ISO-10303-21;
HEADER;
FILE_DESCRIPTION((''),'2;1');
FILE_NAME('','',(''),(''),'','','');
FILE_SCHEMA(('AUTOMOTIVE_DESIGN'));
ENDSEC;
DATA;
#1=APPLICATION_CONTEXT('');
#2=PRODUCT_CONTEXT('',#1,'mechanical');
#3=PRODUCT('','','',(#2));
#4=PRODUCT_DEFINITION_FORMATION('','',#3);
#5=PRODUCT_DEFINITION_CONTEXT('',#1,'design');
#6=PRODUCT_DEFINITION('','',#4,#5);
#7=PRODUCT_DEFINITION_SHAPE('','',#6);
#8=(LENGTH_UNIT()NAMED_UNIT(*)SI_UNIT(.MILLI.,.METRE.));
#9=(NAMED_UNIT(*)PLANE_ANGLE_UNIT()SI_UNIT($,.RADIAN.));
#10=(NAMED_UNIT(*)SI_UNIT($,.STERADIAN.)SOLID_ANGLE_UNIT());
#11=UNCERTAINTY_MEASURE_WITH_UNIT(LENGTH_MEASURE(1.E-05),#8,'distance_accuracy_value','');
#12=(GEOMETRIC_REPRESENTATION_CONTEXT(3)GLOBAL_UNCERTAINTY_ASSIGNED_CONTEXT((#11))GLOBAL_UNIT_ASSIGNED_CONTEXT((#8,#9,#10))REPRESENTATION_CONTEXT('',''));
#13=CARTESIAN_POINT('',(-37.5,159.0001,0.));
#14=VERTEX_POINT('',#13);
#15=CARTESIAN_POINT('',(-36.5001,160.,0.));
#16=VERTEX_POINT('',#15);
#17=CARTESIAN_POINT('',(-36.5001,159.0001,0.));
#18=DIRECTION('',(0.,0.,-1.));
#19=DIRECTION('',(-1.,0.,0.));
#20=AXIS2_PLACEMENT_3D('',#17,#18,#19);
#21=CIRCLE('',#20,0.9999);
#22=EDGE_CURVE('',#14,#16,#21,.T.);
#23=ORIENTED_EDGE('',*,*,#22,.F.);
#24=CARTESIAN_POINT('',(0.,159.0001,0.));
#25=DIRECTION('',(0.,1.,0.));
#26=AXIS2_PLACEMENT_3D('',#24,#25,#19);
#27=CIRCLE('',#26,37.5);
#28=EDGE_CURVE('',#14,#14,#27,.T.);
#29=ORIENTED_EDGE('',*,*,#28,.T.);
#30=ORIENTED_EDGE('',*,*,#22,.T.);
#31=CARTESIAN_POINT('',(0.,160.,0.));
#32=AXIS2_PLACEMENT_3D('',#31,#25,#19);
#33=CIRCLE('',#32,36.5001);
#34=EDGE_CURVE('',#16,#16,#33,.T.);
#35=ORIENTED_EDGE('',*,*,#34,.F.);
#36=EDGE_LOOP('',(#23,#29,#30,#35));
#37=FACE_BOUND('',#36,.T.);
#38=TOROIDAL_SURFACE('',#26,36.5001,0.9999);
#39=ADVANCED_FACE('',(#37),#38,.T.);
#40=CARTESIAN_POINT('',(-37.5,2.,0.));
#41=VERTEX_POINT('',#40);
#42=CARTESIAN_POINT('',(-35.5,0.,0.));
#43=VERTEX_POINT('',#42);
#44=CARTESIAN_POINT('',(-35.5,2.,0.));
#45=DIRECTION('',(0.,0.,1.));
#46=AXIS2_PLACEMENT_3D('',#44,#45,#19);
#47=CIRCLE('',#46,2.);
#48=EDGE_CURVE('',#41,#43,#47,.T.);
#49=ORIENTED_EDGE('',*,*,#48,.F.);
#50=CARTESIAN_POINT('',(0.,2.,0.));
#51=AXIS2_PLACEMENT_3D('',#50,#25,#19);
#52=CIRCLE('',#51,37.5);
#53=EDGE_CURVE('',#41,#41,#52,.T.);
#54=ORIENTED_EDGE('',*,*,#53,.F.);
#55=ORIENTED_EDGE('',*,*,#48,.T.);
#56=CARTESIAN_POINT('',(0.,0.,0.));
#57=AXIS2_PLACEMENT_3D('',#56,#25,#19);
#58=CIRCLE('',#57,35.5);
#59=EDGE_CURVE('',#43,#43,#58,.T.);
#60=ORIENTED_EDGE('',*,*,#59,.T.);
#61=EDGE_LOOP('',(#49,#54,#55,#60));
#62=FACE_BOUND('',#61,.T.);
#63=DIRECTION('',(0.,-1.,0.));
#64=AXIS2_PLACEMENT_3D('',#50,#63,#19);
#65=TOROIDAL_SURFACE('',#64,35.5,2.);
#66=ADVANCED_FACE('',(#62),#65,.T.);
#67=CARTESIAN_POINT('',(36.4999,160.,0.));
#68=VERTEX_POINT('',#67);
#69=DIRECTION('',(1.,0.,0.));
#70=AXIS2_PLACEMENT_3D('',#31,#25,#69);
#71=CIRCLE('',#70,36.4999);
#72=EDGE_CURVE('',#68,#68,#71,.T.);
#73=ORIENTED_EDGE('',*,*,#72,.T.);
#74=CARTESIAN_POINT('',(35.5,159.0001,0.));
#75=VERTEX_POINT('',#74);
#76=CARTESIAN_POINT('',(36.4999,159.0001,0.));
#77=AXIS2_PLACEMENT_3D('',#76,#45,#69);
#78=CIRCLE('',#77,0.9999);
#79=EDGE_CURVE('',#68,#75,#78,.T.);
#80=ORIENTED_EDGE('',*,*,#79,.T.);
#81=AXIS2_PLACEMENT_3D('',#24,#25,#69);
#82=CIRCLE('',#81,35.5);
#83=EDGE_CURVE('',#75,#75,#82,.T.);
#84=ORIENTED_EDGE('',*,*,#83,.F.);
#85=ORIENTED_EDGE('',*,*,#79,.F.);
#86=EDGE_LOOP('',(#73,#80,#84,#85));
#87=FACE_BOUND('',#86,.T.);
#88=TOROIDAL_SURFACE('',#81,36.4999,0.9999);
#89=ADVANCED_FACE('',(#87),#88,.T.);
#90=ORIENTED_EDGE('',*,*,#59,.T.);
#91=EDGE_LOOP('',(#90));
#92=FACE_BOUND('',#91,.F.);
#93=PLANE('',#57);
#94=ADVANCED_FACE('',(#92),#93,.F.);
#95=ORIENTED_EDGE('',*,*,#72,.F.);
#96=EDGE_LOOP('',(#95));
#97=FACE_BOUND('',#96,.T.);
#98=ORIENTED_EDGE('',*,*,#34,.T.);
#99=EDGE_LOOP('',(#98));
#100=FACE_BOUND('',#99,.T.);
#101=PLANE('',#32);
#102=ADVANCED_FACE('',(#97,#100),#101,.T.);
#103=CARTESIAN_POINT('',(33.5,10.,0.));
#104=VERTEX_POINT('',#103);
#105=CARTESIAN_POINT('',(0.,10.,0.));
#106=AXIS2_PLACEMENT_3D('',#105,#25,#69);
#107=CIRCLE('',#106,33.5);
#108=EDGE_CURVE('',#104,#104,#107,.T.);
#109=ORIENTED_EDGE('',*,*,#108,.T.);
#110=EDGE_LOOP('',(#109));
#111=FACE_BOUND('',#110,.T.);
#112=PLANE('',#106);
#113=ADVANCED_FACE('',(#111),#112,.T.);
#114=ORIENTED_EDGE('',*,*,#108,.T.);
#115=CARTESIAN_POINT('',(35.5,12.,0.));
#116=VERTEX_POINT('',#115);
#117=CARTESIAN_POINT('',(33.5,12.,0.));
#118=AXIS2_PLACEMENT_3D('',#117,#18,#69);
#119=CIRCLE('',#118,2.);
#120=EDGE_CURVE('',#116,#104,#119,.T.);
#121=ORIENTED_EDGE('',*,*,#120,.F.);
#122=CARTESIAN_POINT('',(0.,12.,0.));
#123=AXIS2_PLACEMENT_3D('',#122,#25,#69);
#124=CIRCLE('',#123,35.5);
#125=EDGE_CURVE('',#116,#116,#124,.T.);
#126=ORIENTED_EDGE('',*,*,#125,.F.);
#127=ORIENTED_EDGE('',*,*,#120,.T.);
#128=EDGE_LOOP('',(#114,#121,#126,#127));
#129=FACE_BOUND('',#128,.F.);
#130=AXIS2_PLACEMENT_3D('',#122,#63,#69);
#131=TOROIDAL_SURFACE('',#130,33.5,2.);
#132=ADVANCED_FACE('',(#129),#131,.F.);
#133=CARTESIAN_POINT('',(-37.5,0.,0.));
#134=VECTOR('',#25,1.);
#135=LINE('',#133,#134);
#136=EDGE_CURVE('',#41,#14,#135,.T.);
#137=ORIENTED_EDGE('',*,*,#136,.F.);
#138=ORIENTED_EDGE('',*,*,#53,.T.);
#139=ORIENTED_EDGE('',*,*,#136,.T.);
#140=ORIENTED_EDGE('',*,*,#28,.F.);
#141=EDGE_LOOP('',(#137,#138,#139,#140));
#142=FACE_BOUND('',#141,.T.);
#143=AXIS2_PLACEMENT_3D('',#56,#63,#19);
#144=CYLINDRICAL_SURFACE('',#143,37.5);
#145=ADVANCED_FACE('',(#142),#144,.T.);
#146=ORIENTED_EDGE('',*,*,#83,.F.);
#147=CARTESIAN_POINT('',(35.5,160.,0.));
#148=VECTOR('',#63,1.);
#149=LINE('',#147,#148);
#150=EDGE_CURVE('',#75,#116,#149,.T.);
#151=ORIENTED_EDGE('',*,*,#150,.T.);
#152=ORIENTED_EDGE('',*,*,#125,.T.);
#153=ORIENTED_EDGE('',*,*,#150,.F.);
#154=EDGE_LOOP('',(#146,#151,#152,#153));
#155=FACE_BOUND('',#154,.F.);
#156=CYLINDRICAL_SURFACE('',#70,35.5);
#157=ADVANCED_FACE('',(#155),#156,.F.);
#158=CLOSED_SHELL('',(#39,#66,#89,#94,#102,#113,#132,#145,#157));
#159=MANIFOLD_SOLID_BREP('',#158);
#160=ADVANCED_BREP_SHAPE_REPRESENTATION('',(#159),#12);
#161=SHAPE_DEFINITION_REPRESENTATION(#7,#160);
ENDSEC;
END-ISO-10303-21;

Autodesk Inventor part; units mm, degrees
ref_plane "YZ Plane" through (0, 0, 0) normal (1, 0, 0) x (0, 1, 0)
ref_plane "XZ Plane" through (0, 0, 0) normal (0, 1, 0) x (-1, 0, 0)
ref_plane "XY Plane" through (0, 0, 0) normal (0, 0, 1) x (1, 0, 0)
sketch "Skizze2" plane through (0, 0, 0) normal (0, 1, 0) x (-1, 0, 0)
  circle A0 centre (0, 0) radius 37.5
  dimension "d0" = 75
extrude "Extrusion1" add sketch "Skizze2" along normal blind 160
sketch "Skizze3" plane through (0, 160, 0) normal (0, 1, 0) x (1, 0, 0)
  circle A0 centre (0, 0) radius 35.5
  dimension "d3" = 71
extrude "Extrusion2" cut sketch "Skizze3" against normal blind 150
fillet "Rundung1" radius 1 2 edges at (37.5, 160, 0) (-35.5, 160, 0)
fillet "Rundung2" radius 2 1 edges at (37.5, 0, 0)
fillet "Rundung3" radius 2 1 edges at (-35.5, 10, 0)
properties part number "Glas" material "Glas"
